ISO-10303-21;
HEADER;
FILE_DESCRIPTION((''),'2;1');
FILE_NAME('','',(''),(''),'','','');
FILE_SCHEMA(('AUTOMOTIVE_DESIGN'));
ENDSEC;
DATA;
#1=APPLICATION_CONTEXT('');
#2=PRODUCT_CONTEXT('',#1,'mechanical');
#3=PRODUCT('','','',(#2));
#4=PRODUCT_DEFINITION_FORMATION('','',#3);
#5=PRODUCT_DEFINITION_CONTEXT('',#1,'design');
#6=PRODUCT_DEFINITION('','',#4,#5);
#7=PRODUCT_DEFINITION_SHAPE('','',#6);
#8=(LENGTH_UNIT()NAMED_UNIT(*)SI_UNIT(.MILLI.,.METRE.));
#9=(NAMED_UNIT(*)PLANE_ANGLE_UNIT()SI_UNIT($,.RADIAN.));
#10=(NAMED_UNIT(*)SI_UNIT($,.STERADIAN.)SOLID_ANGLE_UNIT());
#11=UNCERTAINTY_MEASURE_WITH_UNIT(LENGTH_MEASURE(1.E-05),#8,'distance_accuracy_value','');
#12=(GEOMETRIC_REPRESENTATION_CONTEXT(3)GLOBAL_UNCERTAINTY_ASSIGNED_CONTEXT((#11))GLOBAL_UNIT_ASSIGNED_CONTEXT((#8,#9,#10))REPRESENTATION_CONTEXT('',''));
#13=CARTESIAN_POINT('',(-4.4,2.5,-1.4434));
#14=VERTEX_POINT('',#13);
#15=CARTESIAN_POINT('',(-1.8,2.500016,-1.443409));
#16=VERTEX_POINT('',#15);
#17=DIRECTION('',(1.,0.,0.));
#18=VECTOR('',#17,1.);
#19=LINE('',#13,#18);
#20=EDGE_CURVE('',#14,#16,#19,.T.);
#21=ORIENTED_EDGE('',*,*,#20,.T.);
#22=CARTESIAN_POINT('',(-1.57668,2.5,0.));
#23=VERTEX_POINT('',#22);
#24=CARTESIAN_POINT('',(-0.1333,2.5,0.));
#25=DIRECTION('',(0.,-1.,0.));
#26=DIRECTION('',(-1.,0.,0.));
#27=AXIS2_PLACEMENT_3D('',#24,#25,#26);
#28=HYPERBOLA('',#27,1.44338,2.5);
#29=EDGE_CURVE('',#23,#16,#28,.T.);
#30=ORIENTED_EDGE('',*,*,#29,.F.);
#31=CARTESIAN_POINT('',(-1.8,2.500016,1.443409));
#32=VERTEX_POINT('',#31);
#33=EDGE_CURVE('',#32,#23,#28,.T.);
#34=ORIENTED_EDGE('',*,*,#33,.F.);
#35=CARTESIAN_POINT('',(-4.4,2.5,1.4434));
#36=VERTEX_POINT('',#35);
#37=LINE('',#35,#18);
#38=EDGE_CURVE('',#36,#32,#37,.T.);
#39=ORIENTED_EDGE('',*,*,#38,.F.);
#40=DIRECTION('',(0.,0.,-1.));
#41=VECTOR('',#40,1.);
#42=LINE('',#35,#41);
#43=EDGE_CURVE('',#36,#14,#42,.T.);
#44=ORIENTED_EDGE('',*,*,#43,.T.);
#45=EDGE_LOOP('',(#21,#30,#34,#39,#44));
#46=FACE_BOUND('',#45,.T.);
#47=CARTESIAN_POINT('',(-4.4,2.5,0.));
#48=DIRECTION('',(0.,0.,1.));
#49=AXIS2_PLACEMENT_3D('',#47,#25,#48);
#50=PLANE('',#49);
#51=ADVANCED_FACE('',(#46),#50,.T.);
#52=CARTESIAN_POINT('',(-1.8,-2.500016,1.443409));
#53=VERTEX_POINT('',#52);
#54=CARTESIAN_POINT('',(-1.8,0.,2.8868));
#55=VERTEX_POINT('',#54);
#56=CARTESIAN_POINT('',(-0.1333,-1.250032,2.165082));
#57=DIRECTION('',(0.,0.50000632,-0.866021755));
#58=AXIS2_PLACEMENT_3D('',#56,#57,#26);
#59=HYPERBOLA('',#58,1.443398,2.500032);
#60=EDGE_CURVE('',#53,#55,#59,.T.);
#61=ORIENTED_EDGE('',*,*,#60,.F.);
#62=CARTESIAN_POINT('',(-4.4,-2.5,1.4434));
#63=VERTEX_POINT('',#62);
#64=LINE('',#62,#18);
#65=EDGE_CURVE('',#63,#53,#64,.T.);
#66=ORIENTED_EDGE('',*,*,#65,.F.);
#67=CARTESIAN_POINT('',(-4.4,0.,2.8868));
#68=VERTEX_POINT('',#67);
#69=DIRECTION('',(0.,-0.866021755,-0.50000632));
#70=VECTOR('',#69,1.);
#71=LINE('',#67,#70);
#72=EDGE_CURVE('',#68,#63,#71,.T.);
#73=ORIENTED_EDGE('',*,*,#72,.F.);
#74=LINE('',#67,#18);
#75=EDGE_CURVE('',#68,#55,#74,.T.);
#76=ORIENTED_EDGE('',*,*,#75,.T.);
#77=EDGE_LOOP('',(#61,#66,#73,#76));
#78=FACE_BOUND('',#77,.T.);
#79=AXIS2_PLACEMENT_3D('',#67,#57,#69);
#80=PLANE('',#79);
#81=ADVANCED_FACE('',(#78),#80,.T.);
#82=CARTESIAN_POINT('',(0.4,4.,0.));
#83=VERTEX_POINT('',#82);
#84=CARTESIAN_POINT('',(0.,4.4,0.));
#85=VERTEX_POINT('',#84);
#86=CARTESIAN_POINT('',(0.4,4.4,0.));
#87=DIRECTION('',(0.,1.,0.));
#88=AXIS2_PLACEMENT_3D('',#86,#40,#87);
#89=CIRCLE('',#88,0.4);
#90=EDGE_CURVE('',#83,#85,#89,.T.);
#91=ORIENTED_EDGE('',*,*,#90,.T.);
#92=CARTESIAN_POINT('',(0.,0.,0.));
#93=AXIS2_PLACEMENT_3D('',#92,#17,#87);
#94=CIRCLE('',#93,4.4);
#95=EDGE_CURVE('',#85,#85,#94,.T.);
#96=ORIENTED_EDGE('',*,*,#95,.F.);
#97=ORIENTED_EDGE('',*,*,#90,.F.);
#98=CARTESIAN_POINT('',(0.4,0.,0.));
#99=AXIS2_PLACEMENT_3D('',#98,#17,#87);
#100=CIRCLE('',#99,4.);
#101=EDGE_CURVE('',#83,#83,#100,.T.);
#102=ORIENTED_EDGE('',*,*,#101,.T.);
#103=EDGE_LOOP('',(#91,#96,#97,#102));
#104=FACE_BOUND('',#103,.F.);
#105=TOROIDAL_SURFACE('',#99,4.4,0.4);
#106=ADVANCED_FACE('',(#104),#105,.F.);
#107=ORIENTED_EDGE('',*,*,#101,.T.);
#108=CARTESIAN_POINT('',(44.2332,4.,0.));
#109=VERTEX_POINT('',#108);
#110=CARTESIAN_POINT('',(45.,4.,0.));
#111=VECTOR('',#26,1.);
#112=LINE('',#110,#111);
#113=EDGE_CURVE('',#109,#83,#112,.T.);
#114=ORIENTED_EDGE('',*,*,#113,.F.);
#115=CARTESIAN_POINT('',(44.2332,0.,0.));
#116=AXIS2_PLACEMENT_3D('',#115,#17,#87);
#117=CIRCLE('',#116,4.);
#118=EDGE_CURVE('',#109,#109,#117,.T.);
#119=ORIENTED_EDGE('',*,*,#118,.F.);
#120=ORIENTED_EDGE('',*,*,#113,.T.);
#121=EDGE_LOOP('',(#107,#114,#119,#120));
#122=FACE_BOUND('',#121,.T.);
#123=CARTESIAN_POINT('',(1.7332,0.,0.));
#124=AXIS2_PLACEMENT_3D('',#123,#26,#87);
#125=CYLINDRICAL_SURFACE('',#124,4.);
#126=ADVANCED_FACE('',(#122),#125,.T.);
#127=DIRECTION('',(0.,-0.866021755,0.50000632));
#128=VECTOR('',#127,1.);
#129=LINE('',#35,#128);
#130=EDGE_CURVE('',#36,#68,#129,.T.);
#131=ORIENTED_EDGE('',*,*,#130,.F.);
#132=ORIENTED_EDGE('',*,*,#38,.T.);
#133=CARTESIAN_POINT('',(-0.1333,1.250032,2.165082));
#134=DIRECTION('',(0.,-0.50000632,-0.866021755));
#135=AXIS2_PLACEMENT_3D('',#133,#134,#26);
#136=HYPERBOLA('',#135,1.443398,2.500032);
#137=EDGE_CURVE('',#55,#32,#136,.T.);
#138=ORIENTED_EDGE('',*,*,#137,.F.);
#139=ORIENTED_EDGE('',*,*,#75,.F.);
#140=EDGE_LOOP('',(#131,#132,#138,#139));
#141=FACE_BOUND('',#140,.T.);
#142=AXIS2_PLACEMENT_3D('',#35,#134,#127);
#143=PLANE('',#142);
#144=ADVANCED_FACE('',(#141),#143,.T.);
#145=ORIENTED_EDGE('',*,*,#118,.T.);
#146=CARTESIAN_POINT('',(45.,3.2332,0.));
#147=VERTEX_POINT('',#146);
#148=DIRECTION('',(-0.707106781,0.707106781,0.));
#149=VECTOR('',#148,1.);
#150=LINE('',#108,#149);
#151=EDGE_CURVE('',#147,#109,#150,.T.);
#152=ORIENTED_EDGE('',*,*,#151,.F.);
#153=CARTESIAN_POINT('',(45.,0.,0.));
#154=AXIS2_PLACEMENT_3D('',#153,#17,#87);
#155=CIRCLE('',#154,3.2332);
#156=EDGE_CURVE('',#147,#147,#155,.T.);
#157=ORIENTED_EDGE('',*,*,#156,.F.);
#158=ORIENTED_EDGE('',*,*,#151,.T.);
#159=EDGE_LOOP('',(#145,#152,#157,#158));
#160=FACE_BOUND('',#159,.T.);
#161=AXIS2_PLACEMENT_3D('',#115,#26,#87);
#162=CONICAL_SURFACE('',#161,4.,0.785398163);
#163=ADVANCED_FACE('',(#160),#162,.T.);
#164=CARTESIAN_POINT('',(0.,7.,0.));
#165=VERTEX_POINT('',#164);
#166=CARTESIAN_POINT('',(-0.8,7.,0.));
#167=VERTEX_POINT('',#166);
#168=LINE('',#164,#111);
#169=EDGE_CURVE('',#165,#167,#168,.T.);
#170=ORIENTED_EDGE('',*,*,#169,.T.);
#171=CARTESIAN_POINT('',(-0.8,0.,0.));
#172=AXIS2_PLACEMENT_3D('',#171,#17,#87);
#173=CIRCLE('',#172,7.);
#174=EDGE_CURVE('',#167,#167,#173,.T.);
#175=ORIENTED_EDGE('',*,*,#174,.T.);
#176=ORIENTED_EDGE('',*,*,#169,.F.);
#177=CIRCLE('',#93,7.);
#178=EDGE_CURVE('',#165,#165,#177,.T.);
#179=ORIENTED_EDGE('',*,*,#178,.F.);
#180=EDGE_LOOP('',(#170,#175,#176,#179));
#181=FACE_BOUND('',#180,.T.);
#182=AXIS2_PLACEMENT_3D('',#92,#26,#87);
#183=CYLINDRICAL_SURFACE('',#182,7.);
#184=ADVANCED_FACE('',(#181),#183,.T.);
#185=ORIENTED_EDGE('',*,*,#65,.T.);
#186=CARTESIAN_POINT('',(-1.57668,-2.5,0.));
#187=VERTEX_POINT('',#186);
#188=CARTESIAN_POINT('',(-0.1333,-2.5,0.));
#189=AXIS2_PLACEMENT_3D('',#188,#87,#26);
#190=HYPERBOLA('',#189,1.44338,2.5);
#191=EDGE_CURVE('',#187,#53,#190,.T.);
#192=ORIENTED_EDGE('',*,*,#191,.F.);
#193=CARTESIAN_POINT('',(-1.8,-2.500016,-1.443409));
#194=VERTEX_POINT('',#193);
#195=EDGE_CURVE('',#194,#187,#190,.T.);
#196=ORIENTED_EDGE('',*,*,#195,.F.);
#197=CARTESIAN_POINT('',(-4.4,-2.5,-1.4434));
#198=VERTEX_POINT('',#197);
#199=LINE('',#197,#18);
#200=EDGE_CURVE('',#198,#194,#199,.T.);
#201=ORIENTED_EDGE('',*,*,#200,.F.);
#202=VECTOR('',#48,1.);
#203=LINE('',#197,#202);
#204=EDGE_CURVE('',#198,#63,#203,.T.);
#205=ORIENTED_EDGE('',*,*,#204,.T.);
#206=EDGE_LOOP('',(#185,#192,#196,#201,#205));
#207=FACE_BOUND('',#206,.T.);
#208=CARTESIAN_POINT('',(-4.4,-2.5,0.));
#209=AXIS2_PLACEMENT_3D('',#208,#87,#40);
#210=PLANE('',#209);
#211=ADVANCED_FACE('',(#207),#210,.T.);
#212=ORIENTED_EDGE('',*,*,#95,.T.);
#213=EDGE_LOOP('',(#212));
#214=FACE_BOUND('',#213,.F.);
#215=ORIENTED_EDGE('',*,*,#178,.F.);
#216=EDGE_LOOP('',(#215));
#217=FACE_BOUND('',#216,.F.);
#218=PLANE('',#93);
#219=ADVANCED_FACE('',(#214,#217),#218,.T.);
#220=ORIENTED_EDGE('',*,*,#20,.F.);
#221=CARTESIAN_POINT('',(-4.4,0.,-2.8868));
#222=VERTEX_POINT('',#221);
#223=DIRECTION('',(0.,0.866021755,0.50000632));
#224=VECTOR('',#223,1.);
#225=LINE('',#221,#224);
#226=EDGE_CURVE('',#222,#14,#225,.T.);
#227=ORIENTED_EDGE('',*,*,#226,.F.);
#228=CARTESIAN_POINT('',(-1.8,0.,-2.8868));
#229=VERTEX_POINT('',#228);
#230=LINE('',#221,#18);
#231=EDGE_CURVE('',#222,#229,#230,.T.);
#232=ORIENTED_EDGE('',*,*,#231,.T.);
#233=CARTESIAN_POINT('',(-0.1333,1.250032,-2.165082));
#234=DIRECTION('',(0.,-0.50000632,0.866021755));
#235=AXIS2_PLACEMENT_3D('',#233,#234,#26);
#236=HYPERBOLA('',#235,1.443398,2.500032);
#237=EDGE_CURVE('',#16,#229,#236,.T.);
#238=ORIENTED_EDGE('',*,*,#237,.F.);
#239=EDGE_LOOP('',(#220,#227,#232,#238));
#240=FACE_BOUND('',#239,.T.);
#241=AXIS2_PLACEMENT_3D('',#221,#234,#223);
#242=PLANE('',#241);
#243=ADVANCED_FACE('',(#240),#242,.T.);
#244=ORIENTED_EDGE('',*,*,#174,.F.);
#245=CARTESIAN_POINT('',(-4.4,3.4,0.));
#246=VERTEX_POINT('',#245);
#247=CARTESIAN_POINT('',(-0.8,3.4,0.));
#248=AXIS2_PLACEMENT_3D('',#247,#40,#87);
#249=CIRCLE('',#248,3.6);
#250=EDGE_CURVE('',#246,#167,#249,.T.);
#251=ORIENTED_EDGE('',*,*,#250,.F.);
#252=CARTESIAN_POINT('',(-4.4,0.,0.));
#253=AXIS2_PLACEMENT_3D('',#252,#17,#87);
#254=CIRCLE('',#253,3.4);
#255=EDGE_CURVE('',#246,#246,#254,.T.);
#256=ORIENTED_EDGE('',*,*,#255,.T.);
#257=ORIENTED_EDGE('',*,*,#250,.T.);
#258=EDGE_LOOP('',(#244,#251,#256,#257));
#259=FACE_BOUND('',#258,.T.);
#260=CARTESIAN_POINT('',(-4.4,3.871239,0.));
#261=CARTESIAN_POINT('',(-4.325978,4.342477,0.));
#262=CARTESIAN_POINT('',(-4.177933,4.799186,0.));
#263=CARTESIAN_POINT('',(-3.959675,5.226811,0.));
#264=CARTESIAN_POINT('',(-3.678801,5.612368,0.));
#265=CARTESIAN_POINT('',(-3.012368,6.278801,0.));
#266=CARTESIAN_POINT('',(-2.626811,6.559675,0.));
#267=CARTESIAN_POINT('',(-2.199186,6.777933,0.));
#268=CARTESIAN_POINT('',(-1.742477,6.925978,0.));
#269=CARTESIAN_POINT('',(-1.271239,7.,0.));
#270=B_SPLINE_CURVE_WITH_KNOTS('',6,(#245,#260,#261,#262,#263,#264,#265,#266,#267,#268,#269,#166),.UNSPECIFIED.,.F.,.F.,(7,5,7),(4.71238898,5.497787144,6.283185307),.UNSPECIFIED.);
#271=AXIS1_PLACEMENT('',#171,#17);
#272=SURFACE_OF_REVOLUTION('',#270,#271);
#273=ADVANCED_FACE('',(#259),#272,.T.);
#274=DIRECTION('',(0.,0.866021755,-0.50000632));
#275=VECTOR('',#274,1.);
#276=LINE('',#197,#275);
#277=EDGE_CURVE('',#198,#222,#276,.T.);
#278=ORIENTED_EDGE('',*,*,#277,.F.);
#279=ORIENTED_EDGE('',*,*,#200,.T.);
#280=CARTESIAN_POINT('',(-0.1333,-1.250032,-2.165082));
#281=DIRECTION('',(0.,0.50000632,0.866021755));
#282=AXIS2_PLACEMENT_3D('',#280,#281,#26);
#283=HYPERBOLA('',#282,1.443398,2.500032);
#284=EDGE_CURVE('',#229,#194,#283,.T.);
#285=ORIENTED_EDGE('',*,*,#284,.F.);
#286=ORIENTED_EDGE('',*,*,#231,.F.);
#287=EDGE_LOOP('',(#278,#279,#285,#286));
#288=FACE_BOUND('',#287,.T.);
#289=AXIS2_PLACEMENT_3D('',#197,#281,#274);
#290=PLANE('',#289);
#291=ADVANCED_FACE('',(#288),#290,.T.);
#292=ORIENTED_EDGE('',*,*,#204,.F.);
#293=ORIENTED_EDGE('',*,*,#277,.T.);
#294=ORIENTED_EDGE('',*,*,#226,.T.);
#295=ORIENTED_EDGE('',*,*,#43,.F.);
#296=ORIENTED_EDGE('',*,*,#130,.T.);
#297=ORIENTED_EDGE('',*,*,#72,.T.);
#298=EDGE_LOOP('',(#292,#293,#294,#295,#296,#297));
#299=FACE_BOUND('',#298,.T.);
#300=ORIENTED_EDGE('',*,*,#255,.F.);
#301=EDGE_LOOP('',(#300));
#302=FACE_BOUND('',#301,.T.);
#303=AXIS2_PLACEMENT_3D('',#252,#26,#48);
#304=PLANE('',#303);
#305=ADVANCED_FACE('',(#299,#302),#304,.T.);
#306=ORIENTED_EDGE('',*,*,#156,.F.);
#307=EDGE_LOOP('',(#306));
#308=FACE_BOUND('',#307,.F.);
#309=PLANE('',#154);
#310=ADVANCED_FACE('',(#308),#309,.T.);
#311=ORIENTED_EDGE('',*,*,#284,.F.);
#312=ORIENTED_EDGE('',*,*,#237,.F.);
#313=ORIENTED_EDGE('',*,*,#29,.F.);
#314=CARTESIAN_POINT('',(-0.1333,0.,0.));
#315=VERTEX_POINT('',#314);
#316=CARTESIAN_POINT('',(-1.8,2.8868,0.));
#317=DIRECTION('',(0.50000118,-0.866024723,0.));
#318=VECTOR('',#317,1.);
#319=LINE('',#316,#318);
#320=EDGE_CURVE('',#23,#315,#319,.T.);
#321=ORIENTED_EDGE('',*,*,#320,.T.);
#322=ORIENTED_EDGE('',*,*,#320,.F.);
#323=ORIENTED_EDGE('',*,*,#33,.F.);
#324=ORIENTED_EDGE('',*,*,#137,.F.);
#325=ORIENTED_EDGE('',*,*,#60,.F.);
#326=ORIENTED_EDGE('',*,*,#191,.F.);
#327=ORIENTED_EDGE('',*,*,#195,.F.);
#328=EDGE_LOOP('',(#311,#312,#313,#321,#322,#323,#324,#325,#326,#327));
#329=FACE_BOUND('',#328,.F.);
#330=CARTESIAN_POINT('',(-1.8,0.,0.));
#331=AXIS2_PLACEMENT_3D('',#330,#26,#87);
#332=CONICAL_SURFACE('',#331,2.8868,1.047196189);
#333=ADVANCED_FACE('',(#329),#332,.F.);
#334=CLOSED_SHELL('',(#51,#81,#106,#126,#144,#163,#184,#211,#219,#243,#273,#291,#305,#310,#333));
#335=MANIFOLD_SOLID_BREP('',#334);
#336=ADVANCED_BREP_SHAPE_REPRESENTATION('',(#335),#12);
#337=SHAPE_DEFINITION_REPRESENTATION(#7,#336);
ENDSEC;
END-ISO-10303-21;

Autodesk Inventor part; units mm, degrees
ref_plane "YZ Plane" through (0, 0, 0) normal (1, 0, 0) x (0, 1, 0)
ref_plane "XZ Plane" through (0, 0, 0) normal (0, 1, 0) x (-1, 0, 0)
sketch "Sketch1" plane through (0, 0, 0) normal (0, 0, 1) x (1, 0, 0)
  line L0 (-0.1333, 0) -> (45, 0)
  line L1 (45, 0) -> (45, 4)
  line L2 (45, 4) -> (2.5, 4)
  line L3 (2.5, 4) -> (1.7332, 4)
  line L4 (1.7332, 4) -> (0, 4)
  line L5 (0, 4) -> (0, 7)
  line L6 (0, 7) -> (-4.4, 7)
  line L7 (-4.4, 7) -> (-4.4, 2.8868)
  line L8 (-4.4, 2.8868) -> (-1.8, 2.8868)
  line L9 (-1.8, 2.8868) -> (-0.1333, 0)
  line L10 (-14.28, 0) -> (54.88, 0) projected
  line L11 (0, -1.4) -> (0, 8.4) projected
  line L12 (2.5, 4) -> (0, 4) construction
  dimension "d0" = 42.5
  dimension "d1" = 0.7668
  dimension "d2" = 4.4
  dimension "d3" = 2.6
  dimension "d4" = 60
  dimension "d5" = 8
  dimension "d6" = 8
  dimension "d7" = 5.7735
  dimension "d8" = 14
  dimension "d19" = 45
revolve "Body" add sketch "Sketch1" angle 360 about axis through (-0.1333, 0, 0) along (1, 0, 0)
sketch "Sketch2" plane through (-4.4, 0, 0) normal (-1, 0, 0) x (0, 0, 1)
  circle A0 centre (0, 0) radius 2.8868 projected
  line L0 (0, -9.8) -> (0, 9.8) projected
  line L1 (-9.8, 0) -> (9.8, 0) projected
  line L2 (2.8868, 0) -> (1.4434, -2.5)
  line L3 (1.4434, -2.5) -> (-1.4434, -2.5)
  line L4 (-1.4434, -2.5) -> (-2.8868, 0)
  line L5 (-2.8868, 0) -> (-1.4434, 2.5)
  line L6 (-1.4434, 2.5) -> (1.4434, 2.5)
  line L7 (1.4434, 2.5) -> (2.8868, 0)
extrude "Slot" add sketch "Sketch2" against normal up to next contours L7 A0 | A0 L2 | L6 L0 A0 | A0 L0 L3 | L0 L6 A0 | A0 L3 L0 | L4 A0 | A0 L5
fillet "Fillet1" radius 3.6 1 edges at (-4.4, -7, 0)
thread "Thread" size "M8x1.25" class "4g6g" standard "ANSI Metric M Profile" length 42.5
chamfer "Chamfer1" distance 0.7668 distance2 0.7668 1 edges at (45, -4, 0) measured on face at (45, -0.998, -0.8842)
fillet "Fillet2" radius 0.4 1 edges at (0, -4, 0)
ref_plane "Work Plane1" through (30, 0, 0) normal (0, -0.5, 0.8660254) x (1, 0, 0)
equation "\"d16\" = RR"
equation "\"d12\" = GEL"
equation "\"d14\" = -0.5 * SPD + 0.5 * GD"
equation "\"d15\" = GUL"
equation "\"d29\" = R"
equation "\"d0\" = GEL"
equation "\"d1\" = GAL"
equation "\"d2\" = KOH"
equation "\"d3\" = INTI"
equation "\"d5\" = GD"
equation "\"d6\" = BDM"
equation "\"d7\" = 1.1547 * SW"
equation "\"d8\" = KOD"
equation "\"d19\" = NLG"
equation "\"GD\" = NND"
equation "\"NLG\" = 45"
equation "\"GEL\" = 42.5"
equation "\"KOD\" = 14"
equation "\"KOH\" = 4.4"
equation "\"INTI\" = 2.6"
equation "\"GAL\" = 0.61345 * PTC"
equation "\"GUL\" = 0.61345 * PTC"
equation "\"BDM\" = NND"
equation "\"SW\" = 5"
equation "\"RR\" = 3.6"
equation "\"SPD\" = 6.46638"
equation "\"d28\" = R"
equation "\"R\" = 0.4"
equation "\"TOA\" = 30deg"
equation "\"THREADDIA\" = 8"
equation "\"KOD1\" = KOD - 2 * RR"
equation "\"PTC\" = 1.25"
equation "\"NND\" = 8"
equation "\"E0\" = 1.155 * SW"
equation "\"GD1\" = THREADDIA - 1.2269 * PTC"
properties part number "ANSI B18.3.4M - M8 x 1.25 x 45, FHSBHCSM" material "Steel, Mild"
